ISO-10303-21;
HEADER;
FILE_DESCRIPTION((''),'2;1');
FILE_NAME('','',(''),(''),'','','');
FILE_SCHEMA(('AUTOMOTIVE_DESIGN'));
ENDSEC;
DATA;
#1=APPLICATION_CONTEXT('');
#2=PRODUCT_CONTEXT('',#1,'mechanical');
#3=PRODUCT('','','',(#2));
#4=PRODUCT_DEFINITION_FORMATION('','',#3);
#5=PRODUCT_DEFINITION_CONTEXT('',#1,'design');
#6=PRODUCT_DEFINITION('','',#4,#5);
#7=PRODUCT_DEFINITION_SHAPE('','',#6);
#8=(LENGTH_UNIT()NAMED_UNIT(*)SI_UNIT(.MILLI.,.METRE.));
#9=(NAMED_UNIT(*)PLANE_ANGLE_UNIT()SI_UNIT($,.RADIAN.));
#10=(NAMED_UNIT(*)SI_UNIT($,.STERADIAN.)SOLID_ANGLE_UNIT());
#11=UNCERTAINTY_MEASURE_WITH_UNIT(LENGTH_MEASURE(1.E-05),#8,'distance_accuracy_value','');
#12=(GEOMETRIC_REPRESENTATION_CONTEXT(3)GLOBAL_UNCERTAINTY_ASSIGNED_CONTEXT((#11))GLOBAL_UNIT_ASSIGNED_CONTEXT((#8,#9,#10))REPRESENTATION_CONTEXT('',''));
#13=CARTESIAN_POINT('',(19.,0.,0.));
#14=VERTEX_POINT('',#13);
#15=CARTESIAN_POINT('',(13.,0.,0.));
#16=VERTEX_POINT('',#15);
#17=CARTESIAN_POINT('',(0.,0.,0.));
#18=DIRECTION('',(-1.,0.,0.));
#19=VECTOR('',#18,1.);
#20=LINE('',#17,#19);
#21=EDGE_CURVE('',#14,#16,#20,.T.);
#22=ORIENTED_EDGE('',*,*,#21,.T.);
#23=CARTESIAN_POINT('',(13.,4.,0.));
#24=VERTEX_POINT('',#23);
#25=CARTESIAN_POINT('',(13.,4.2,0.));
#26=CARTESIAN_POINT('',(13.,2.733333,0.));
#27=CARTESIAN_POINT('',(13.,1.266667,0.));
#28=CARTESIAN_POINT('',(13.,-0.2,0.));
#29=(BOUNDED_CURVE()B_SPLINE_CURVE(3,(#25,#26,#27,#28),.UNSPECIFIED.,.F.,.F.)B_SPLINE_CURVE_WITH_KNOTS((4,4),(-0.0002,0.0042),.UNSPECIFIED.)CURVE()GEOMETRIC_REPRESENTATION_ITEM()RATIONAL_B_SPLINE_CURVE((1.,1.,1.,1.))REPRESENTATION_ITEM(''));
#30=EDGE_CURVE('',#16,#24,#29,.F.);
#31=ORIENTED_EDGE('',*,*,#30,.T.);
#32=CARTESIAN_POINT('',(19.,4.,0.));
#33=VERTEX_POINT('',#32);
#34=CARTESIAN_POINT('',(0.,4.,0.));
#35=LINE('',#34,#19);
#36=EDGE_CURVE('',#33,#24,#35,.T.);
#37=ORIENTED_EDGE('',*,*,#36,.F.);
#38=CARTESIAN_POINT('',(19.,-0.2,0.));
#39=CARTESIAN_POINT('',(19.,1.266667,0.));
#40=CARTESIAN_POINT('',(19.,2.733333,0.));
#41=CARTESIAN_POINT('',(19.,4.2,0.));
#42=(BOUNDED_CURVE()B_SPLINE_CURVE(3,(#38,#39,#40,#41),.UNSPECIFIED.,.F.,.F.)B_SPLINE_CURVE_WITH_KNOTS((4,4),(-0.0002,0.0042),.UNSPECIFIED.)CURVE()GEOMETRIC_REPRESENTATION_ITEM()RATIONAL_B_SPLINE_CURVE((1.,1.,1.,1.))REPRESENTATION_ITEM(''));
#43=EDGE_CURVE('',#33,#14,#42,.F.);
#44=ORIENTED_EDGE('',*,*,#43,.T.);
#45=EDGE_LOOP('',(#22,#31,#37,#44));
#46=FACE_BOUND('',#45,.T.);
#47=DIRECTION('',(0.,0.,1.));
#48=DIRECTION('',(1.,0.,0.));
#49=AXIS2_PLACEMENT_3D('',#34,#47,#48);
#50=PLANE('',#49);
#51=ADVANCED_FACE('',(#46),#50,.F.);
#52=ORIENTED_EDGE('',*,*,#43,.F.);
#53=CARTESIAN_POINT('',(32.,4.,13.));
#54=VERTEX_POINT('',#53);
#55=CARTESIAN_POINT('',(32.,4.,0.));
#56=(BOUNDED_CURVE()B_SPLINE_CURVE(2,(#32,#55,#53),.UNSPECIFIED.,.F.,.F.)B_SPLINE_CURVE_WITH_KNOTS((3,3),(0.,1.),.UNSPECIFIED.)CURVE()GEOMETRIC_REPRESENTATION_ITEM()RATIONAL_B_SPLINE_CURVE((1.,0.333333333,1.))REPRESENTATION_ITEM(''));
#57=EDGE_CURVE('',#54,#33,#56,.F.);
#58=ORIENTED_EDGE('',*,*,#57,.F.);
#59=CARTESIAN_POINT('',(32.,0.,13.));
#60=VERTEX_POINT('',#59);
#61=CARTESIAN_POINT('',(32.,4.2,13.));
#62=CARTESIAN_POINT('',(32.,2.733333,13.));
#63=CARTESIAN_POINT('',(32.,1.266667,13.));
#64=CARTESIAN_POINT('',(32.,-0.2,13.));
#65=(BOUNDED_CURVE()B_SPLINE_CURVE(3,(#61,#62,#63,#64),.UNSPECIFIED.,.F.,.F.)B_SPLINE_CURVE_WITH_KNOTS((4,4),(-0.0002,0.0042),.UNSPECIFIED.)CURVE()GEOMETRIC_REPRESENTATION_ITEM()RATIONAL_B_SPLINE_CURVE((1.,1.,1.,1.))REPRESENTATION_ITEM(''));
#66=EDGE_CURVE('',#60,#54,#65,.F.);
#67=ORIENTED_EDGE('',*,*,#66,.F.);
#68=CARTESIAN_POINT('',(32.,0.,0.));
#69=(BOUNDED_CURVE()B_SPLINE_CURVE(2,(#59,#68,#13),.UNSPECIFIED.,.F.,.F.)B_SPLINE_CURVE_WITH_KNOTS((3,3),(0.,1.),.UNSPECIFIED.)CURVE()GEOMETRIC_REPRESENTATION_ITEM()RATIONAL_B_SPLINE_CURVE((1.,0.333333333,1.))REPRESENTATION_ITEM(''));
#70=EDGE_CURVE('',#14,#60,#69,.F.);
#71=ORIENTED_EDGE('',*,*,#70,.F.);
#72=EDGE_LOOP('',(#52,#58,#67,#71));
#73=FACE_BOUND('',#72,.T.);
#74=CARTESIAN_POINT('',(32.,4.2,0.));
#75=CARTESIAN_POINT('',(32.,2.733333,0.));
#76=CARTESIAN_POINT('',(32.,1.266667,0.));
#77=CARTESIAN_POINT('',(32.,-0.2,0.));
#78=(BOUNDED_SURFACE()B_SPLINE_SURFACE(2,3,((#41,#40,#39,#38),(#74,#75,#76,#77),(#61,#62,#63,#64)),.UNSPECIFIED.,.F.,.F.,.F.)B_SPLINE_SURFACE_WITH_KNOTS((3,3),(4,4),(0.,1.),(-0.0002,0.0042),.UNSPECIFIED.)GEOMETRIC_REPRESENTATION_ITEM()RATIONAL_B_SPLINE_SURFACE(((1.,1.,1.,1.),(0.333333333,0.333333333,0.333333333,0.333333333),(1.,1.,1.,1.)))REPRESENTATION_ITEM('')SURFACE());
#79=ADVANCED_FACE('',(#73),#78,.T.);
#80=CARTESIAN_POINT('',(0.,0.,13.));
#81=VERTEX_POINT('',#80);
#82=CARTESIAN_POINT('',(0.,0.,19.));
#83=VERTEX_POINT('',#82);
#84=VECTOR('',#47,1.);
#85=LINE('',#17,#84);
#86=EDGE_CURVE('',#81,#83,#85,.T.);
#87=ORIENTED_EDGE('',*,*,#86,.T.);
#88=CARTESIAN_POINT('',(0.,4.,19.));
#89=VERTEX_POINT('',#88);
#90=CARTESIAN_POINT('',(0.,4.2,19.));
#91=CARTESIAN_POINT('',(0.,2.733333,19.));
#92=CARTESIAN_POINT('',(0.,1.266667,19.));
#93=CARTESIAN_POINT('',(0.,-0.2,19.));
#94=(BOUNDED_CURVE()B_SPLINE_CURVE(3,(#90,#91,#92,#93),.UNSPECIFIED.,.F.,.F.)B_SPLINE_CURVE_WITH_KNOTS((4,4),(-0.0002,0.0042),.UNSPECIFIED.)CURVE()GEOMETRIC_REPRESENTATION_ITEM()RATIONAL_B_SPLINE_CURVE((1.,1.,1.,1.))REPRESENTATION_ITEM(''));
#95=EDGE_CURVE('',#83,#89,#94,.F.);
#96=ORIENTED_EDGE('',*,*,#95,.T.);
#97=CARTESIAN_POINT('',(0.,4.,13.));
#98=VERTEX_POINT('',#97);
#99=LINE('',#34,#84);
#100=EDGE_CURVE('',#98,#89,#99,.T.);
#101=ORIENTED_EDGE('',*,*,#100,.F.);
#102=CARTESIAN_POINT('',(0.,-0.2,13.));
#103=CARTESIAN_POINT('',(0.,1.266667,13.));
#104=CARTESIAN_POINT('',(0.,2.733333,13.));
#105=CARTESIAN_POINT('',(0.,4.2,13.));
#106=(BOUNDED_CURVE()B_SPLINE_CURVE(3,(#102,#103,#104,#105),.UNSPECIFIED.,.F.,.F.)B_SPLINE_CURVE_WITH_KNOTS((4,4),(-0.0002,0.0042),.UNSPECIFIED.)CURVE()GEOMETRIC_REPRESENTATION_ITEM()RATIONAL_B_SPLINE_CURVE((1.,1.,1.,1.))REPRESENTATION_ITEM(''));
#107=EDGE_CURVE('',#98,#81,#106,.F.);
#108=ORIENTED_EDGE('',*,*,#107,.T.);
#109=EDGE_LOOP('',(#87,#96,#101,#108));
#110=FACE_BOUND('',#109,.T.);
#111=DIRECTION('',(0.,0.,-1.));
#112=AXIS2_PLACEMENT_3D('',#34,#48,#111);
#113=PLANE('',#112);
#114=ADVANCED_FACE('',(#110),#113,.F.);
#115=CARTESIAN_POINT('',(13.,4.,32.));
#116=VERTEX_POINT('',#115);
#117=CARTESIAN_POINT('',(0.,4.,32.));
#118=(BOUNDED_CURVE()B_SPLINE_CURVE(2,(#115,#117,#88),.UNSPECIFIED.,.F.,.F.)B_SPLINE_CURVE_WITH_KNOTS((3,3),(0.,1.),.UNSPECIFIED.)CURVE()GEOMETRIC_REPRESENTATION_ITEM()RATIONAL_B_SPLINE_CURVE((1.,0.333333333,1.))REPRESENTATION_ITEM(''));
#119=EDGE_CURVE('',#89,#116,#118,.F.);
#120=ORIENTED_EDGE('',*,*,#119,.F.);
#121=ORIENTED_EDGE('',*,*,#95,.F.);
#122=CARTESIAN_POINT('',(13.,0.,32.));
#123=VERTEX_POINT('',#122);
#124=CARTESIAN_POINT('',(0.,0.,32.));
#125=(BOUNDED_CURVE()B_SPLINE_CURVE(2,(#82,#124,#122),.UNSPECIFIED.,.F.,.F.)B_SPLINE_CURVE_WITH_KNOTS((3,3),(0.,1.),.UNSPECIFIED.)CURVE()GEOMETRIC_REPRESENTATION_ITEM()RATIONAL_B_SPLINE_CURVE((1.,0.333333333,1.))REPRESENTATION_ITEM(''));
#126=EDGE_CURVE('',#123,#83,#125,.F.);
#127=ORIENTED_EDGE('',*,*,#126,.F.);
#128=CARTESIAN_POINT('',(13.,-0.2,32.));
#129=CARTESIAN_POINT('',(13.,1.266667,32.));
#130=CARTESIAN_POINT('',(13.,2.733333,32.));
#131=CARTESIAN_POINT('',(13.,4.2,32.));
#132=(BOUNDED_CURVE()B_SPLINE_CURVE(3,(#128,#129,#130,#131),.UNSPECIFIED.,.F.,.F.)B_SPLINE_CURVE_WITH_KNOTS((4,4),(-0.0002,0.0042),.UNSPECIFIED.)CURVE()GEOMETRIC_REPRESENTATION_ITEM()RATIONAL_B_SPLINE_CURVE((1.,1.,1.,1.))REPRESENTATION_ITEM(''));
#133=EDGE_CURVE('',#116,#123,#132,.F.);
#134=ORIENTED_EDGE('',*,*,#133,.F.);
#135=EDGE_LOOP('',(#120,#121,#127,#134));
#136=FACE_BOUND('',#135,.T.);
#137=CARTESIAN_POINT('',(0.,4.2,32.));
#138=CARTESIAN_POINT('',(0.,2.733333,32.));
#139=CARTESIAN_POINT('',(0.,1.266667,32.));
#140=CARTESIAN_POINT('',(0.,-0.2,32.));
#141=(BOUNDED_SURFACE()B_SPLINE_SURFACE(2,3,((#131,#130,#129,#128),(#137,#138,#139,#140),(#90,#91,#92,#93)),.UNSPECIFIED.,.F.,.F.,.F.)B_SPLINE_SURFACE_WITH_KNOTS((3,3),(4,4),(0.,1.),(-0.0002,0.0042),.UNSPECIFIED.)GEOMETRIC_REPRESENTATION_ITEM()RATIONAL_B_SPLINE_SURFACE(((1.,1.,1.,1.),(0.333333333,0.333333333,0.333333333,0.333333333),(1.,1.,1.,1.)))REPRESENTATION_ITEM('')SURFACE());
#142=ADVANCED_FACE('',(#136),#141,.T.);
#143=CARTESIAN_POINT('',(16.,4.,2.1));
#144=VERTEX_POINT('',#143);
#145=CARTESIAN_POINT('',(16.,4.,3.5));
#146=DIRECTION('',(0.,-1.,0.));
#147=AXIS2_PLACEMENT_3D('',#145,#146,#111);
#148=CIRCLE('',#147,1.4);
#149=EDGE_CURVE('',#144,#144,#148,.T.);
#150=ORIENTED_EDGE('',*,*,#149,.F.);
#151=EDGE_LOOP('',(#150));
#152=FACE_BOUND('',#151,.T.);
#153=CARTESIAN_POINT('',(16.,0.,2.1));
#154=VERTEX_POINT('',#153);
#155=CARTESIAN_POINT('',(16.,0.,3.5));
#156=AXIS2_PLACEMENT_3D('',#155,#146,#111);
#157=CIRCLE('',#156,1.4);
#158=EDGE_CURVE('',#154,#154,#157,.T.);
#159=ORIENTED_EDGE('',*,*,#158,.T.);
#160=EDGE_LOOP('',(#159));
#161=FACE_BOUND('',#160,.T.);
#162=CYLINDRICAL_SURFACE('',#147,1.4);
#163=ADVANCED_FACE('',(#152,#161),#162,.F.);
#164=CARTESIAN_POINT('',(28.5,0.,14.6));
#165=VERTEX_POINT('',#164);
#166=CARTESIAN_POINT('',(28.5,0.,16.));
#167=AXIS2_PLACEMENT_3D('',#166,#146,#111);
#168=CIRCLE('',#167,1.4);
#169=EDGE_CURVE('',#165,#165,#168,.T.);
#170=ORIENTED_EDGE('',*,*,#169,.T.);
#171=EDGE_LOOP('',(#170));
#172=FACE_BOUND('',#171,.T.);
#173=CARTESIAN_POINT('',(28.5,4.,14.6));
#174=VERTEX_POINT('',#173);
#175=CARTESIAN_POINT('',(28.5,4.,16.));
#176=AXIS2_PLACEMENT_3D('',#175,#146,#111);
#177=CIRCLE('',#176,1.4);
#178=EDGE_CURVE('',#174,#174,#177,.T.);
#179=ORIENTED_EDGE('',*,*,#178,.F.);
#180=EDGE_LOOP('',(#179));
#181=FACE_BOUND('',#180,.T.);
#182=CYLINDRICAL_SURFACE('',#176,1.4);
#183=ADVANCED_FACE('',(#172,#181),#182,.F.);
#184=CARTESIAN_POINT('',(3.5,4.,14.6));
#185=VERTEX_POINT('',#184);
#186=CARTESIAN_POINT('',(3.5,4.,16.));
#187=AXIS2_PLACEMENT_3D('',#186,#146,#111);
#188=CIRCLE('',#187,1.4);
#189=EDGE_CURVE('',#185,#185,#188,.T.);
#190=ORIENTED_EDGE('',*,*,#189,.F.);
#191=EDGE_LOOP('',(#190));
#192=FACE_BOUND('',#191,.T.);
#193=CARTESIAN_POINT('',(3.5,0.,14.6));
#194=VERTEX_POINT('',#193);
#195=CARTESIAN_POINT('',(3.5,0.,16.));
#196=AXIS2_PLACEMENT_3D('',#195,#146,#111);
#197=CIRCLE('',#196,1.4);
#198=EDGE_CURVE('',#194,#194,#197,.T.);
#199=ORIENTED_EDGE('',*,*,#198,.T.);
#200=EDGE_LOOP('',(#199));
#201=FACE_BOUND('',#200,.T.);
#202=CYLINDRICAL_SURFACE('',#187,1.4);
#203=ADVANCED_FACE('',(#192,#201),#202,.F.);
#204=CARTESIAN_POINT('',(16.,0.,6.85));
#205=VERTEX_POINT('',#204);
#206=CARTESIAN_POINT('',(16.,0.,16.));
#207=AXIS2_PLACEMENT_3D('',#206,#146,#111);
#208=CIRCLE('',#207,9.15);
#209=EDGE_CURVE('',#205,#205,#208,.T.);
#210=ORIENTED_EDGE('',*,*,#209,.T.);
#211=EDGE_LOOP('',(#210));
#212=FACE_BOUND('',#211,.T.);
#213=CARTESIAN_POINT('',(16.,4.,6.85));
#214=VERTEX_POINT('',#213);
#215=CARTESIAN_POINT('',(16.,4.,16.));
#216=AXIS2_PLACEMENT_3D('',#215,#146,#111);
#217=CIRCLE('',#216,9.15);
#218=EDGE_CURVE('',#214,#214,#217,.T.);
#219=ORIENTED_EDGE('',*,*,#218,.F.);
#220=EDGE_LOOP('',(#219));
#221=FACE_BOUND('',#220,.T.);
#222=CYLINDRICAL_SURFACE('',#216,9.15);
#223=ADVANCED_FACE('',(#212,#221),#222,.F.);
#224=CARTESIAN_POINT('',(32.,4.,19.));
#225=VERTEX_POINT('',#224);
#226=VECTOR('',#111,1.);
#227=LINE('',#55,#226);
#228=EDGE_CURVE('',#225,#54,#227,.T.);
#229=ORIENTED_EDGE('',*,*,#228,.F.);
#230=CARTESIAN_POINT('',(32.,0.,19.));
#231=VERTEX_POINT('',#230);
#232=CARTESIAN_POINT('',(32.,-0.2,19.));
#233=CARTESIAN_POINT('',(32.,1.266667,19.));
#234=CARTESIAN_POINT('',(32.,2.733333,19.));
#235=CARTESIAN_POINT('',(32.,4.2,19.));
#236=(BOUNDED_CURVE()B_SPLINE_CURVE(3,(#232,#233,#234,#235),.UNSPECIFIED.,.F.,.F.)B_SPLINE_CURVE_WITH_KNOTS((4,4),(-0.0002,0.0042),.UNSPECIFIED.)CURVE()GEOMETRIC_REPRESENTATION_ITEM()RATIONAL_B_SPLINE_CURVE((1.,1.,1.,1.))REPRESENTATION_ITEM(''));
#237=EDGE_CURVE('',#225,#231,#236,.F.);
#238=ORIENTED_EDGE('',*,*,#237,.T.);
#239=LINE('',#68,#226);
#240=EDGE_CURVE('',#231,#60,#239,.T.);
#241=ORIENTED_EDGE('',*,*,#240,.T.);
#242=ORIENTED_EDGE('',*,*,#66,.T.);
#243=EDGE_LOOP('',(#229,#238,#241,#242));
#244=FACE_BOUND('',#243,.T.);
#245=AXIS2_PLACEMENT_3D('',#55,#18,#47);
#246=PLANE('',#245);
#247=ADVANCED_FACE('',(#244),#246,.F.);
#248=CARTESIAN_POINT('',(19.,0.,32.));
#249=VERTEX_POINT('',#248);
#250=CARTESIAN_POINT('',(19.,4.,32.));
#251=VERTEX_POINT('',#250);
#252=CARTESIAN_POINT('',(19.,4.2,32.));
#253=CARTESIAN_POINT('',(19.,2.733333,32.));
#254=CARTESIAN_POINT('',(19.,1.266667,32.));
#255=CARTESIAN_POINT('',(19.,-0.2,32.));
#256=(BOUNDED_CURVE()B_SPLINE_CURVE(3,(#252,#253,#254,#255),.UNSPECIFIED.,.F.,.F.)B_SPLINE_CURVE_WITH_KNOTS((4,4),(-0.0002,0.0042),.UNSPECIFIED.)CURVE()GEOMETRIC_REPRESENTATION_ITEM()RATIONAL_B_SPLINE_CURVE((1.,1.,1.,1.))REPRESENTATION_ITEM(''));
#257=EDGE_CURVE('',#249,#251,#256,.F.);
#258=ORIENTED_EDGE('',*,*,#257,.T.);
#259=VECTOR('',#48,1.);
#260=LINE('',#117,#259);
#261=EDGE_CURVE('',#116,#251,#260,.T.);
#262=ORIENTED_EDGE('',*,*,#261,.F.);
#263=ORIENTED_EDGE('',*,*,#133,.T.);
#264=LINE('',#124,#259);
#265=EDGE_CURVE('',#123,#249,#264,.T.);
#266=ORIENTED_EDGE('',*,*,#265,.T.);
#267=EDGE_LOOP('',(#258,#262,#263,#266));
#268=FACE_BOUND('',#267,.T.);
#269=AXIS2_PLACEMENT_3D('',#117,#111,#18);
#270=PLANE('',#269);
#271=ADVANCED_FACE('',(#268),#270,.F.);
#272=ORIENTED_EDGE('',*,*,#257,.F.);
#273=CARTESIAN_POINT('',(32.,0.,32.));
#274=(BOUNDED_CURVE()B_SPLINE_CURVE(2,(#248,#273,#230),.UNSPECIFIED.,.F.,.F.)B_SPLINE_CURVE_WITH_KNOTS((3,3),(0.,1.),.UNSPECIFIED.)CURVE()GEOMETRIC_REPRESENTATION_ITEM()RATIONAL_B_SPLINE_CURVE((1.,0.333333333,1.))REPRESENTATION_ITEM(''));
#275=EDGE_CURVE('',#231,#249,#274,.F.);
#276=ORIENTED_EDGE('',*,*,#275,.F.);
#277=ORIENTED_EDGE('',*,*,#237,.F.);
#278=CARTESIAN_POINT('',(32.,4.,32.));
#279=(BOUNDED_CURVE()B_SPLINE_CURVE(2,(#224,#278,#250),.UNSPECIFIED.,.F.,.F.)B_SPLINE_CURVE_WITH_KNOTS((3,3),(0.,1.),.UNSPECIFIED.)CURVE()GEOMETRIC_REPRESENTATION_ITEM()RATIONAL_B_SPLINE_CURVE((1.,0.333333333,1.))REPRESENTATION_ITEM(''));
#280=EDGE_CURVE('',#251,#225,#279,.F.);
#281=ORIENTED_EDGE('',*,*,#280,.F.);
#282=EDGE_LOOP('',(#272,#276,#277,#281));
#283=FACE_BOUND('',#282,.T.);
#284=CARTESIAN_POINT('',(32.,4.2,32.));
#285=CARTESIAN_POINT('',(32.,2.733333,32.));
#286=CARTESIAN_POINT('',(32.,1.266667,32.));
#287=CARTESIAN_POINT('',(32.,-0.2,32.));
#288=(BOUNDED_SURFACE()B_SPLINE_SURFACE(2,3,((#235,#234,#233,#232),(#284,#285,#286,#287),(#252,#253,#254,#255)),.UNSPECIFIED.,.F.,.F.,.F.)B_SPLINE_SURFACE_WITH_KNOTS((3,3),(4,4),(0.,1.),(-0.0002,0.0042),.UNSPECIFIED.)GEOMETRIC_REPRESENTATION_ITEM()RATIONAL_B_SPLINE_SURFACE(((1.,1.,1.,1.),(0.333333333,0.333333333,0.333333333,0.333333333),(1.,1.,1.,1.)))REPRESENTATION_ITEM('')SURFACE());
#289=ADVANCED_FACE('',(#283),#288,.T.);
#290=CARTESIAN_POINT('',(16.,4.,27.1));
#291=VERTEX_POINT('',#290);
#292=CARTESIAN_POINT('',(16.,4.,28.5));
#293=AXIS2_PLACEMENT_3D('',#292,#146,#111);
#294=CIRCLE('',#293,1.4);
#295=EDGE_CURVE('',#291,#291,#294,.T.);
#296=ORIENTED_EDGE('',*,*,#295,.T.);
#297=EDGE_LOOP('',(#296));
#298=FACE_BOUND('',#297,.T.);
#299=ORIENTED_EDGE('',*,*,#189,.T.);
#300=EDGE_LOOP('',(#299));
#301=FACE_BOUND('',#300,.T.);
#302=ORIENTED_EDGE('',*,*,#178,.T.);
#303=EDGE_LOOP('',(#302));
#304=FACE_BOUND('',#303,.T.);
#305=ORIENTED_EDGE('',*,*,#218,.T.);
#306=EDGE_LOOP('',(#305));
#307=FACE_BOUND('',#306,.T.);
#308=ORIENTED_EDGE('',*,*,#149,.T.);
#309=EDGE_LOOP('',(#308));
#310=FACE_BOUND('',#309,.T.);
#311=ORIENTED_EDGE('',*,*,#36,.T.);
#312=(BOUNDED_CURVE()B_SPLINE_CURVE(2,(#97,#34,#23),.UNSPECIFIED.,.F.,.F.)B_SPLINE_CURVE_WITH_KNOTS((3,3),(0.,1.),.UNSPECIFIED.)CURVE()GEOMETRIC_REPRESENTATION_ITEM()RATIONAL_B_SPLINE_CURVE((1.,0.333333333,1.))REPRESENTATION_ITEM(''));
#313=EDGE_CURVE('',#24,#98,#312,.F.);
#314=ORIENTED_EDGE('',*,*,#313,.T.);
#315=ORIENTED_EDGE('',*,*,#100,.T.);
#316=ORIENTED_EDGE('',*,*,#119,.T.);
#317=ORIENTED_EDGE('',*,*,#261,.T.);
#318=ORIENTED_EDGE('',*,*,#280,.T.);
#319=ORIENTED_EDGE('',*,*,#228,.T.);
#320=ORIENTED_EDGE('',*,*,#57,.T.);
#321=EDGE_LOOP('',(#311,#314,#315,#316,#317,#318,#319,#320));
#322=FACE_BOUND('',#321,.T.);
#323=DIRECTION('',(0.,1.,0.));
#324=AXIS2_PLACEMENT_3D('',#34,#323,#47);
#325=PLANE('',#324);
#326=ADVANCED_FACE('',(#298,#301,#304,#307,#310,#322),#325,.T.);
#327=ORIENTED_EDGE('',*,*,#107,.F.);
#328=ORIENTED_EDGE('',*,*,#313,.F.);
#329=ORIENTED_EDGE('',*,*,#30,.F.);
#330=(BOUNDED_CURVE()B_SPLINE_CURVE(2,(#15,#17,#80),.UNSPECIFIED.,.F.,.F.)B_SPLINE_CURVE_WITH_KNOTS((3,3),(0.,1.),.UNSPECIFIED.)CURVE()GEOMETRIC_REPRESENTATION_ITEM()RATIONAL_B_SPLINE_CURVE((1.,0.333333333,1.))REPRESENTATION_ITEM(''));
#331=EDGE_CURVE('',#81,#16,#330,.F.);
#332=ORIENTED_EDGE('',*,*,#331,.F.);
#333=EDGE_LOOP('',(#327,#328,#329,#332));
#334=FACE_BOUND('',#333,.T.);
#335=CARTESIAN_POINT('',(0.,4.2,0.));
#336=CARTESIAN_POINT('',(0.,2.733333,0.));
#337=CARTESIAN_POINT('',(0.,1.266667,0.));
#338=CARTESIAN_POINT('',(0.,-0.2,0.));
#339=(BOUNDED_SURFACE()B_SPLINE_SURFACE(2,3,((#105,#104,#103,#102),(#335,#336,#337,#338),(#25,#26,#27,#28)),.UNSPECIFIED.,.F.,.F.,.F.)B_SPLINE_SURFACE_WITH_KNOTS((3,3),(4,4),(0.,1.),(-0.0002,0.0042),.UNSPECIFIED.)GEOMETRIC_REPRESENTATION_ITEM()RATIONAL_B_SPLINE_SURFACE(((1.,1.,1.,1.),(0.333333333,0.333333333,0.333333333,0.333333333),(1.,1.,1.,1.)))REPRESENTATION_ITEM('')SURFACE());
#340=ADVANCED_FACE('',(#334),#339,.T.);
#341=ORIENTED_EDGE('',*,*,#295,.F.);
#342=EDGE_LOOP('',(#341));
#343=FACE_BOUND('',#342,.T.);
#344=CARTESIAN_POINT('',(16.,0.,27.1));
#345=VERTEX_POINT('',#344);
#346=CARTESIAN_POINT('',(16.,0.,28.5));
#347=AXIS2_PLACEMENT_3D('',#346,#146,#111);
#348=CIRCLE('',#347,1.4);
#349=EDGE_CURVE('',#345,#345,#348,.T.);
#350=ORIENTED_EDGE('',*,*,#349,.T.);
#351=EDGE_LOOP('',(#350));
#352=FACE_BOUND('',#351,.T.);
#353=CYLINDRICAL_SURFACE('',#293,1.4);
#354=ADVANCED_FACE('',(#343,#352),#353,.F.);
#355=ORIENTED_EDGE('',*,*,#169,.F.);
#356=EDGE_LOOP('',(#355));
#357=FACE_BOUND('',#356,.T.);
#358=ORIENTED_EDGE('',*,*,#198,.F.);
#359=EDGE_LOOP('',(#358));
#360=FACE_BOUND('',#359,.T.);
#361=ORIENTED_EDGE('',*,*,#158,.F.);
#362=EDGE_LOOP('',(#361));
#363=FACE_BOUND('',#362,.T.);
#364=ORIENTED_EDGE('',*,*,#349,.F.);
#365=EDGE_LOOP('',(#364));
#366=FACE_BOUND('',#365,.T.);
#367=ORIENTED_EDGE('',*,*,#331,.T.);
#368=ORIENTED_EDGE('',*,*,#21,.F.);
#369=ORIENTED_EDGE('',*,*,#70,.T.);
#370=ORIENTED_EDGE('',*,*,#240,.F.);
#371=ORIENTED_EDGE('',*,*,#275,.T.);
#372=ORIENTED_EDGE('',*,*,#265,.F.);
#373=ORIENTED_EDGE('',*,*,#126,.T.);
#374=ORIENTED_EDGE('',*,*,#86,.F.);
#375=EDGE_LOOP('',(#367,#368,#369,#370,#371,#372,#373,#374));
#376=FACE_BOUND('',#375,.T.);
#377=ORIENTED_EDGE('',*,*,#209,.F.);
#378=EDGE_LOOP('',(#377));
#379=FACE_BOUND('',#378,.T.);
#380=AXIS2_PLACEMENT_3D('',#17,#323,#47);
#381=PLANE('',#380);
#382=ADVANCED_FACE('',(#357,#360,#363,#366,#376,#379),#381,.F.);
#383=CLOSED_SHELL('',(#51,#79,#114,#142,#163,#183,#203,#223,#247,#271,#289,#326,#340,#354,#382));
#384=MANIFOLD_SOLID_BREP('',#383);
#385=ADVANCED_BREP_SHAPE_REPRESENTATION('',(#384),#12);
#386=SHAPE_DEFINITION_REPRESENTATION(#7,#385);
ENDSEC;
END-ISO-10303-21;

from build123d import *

# Parameters (mm, degrees)
SKETCH1_W           = 32
SKETCH1_H           = 32
BOSS_EXTRUDE1_DEPTH = 4
SKETCH2_R           = 9.15
SKETCH2_R_2         = 1.4
CUT_EXTRUDE1_DEPTH  = 4
FILLET1_SIZE        = 13


with BuildPart() as part:
    # Sketch1 → Boss-Extrude1 (new body)
    with BuildSketch(Plane(origin=(0, 0, 0), x_dir=(1, 0, 0), z_dir=(0, 1, 0))):
        with Locations((16, -16)):
            Rectangle(SKETCH1_W, SKETCH1_H)
    extrude(amount=BOSS_EXTRUDE1_DEPTH)

    # Sketch2 → Cut-Extrude1 (cut)
    with BuildSketch(Plane(origin=(0, 0, 0), x_dir=(-1, 0, 0), z_dir=(0, -1, 0))):
        with Locations(Location((-16, -16, 0), (0, 0, 90))):
            Circle(SKETCH2_R)
        with Locations(Location((-16, -28.5, 0), (0, 0, 90))):
            Circle(SKETCH2_R_2)
        with Locations(Location((-28.5, -16, 0), (0, 0, 90))):
            Circle(SKETCH2_R_2)
        with Locations(Location((-16, -3.5, 0), (0, 0, 90))):
            Circle(SKETCH2_R_2)
        with Locations(Location((-3.5, -16, 0), (0, 0, 90))):
            Circle(SKETCH2_R_2)
    extrude(amount=-CUT_EXTRUDE1_DEPTH, mode=Mode.SUBTRACT)

    # Fillet1
    # a fillet whose section is not a circle: 13 mm, written as the material it takes off along each edge
    with BuildSketch(Plane(origin=(0, -32.5, 0), x_dir=(1, 0, 0), z_dir=(0, 1, 0)), Plane(origin=(0, -32.5, 32), x_dir=(0, 0, -1), z_dir=(0, 1, 0))) as fillet1_piece_1:
        with BuildLine():
            Bezier((FILLET1_SIZE, 0), (0, 0), (0, -FILLET1_SIZE), weights=[1, 0.333333333, 1])
            Line((0, -FILLET1_SIZE), (0, 0))
            Line((0, 0), (FILLET1_SIZE, 0))
        make_face()
    extrude(amount=69, mode=Mode.SUBTRACT)
    with BuildSketch(Plane(origin=(32, -32.5, 0), x_dir=(-1, 0, 0), z_dir=(0, 1, 0)), Plane(origin=(32, -32.5, 32), x_dir=(0, 0, -1), z_dir=(0, 1, 0))) as fillet1_piece_2:
        with BuildLine():
            Bezier((FILLET1_SIZE, 0), (0, 0), (0, FILLET1_SIZE), weights=[1, 0.333333333, 1])
            Line((0, FILLET1_SIZE), (0, 0))
            Line((0, 0), (FILLET1_SIZE, 0))
        make_face()
    extrude(amount=69, mode=Mode.SUBTRACT)


solid = part.part
